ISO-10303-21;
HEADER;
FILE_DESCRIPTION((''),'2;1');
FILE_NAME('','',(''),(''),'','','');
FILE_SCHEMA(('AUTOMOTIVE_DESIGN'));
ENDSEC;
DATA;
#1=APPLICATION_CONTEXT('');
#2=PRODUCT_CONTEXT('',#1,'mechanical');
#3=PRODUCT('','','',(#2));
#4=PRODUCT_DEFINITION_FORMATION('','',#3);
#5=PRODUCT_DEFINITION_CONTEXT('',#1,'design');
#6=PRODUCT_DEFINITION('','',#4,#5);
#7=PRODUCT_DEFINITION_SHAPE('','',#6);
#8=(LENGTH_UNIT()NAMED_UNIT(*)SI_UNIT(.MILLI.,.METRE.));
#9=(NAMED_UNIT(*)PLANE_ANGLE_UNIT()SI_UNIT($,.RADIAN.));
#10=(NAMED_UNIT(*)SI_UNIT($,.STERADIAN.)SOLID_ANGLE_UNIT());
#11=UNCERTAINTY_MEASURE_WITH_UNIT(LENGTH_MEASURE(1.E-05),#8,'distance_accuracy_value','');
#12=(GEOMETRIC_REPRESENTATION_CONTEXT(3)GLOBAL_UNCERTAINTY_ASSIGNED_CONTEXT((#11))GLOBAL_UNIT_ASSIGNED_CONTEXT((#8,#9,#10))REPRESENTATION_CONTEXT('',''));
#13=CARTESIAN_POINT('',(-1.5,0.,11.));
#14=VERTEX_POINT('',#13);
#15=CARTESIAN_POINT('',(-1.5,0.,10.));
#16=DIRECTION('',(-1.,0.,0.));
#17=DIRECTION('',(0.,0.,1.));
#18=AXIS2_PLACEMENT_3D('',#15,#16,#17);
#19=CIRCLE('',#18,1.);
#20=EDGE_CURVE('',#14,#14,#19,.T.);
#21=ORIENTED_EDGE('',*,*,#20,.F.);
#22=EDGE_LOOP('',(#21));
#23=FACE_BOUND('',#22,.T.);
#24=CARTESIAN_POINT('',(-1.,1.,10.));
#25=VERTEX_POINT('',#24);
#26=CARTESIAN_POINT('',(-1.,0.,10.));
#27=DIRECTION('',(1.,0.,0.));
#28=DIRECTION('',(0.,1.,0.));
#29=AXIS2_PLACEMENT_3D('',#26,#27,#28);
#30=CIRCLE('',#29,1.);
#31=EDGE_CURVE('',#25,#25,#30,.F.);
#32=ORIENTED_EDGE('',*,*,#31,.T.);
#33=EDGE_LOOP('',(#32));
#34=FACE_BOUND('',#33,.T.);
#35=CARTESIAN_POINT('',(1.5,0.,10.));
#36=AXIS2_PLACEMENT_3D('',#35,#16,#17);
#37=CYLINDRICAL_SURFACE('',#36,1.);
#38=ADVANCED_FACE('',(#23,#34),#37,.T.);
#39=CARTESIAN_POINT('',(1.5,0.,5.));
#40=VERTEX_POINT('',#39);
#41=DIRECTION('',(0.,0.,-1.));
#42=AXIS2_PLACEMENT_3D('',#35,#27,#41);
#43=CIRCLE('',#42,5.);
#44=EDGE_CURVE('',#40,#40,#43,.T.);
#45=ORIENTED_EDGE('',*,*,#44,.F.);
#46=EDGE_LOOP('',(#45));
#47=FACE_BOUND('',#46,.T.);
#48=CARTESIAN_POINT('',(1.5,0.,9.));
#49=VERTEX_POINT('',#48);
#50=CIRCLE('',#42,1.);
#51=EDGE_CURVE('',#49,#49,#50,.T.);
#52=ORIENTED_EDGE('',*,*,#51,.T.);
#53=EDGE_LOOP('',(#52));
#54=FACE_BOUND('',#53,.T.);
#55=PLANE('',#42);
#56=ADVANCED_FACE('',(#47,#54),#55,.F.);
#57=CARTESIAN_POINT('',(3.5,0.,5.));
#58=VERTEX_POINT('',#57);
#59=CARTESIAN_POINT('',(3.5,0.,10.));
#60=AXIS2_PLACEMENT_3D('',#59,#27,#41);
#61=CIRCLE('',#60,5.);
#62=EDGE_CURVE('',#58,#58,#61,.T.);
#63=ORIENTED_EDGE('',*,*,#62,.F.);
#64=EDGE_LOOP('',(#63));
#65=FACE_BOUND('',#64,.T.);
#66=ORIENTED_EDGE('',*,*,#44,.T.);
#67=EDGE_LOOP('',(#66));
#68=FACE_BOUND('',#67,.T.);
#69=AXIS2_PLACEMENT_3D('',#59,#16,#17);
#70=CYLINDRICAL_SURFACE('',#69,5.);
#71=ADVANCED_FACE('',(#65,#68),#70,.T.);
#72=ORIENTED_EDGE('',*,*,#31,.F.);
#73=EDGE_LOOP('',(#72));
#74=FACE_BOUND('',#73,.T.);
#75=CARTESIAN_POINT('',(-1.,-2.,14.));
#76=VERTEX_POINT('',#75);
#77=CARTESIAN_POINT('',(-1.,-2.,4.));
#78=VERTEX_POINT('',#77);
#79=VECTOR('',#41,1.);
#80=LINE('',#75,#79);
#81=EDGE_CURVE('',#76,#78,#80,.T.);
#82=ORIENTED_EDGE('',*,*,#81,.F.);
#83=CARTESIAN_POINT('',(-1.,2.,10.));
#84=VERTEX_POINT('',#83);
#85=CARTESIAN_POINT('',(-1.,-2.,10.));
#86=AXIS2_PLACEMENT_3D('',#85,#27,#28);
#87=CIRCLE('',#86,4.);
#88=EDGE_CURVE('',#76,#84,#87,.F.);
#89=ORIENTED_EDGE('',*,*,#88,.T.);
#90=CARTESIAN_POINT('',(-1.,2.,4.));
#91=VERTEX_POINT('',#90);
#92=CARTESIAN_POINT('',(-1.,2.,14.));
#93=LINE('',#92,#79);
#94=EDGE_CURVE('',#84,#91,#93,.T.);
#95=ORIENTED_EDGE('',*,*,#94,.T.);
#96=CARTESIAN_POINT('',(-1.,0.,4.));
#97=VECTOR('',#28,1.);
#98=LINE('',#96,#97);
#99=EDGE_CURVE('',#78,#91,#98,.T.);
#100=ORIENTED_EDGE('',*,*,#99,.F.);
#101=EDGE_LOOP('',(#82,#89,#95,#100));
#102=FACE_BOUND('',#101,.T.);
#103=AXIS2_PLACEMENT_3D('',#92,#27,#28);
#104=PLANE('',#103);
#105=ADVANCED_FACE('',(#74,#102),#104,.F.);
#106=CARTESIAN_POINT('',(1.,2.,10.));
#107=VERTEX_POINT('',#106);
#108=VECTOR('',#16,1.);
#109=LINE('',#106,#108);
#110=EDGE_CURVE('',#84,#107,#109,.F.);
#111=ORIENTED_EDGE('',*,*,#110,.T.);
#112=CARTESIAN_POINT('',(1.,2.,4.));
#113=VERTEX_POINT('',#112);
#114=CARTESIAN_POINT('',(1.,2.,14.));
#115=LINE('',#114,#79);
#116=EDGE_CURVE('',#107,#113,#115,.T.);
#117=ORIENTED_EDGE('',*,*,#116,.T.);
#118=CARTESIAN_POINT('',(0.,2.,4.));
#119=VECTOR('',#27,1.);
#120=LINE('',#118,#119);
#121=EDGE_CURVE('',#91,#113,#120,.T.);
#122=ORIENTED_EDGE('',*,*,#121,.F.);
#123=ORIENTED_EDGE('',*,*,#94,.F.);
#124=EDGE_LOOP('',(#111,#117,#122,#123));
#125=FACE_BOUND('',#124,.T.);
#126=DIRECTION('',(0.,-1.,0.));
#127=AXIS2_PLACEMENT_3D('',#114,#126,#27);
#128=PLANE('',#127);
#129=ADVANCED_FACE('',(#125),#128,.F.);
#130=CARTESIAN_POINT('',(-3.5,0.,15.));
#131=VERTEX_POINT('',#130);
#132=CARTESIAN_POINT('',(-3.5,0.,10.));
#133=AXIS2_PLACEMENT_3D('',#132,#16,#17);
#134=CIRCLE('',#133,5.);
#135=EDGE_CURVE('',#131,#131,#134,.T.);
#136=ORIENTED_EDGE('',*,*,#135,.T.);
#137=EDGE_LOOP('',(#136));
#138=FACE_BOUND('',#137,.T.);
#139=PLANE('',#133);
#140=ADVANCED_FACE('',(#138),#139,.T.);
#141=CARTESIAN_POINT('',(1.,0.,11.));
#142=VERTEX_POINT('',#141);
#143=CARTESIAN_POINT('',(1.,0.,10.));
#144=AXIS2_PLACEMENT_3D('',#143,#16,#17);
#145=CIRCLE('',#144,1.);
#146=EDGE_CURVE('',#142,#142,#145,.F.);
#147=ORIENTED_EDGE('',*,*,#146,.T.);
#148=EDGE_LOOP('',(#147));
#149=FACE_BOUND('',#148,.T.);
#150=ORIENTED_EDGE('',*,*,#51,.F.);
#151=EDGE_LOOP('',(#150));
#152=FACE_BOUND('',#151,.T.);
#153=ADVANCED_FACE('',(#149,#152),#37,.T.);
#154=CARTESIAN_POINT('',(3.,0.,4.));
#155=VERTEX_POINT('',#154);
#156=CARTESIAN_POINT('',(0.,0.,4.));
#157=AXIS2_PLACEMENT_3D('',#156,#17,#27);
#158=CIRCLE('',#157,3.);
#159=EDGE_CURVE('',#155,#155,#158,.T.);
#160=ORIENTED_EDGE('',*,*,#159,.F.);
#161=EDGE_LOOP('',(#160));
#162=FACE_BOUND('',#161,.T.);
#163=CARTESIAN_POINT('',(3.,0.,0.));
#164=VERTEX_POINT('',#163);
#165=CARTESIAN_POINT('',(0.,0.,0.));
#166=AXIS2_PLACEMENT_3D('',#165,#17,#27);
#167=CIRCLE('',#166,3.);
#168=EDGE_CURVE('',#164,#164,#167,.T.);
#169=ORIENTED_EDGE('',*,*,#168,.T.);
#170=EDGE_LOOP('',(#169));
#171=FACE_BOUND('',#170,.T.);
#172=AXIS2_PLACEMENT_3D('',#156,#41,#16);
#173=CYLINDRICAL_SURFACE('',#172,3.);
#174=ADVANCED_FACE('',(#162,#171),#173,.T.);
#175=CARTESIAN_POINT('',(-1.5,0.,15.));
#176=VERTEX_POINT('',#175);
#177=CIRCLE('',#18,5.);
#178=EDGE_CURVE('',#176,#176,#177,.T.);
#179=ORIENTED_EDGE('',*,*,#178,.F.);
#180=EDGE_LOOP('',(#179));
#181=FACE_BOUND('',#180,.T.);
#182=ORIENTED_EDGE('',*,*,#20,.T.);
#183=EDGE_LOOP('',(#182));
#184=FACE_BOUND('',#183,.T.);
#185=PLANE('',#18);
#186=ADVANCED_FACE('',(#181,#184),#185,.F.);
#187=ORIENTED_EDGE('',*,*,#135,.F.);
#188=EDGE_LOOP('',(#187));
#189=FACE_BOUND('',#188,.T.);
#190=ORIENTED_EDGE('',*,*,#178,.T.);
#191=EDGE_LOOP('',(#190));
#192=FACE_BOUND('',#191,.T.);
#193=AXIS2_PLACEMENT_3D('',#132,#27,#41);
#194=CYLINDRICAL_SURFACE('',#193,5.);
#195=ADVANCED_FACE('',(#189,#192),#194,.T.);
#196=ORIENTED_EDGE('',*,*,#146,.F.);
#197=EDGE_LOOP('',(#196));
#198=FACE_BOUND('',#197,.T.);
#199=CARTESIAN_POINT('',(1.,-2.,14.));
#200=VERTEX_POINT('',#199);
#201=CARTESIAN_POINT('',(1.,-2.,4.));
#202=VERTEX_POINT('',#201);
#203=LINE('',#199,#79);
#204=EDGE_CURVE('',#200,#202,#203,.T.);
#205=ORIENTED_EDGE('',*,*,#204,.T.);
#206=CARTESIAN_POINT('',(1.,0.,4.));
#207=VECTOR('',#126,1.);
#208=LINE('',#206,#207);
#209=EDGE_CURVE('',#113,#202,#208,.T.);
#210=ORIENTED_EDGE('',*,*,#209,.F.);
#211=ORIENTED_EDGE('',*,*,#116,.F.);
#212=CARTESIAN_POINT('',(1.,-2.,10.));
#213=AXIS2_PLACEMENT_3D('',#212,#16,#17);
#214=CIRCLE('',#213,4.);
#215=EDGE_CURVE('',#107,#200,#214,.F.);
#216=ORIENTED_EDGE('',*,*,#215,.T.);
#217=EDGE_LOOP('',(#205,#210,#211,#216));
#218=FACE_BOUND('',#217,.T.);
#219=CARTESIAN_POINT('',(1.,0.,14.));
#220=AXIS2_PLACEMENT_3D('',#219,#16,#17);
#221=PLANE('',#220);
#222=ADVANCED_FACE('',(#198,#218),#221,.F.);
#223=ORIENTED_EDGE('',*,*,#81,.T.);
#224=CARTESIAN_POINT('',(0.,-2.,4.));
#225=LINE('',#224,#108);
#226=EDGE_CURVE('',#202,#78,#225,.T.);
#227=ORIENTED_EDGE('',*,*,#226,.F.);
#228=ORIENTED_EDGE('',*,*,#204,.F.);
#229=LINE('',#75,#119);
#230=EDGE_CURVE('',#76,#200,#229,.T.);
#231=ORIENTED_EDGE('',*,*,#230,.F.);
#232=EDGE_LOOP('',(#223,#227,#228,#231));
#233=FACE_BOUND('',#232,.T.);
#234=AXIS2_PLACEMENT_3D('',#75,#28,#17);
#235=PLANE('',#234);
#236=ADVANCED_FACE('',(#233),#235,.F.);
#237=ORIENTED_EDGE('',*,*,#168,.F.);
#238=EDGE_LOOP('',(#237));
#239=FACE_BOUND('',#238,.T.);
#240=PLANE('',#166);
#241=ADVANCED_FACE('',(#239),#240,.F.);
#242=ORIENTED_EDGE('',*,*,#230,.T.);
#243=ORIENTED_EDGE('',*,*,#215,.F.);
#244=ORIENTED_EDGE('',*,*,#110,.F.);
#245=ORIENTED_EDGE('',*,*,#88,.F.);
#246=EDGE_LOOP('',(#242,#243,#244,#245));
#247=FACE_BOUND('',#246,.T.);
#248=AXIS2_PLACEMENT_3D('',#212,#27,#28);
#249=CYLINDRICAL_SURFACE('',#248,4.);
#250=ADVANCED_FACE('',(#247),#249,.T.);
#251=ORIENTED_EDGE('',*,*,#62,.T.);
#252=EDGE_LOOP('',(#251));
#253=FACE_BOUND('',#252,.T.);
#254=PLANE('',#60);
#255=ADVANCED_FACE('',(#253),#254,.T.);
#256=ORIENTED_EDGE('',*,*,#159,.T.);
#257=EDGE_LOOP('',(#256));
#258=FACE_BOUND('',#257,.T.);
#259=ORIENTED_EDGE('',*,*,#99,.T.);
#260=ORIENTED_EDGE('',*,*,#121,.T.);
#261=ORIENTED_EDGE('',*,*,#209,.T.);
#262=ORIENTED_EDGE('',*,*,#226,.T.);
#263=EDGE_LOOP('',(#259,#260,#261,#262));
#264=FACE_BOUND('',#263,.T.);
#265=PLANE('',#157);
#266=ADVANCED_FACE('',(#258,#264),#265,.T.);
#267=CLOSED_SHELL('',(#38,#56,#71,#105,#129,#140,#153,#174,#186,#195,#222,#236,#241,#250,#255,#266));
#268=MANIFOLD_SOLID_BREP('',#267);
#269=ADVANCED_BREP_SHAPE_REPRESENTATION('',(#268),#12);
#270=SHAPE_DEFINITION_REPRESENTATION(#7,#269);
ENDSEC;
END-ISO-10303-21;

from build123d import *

# Parameters (mm, degrees)
SKETCH_1_R      = 3
EXTRUDE_1_DEPTH = 4
EXTRUDE_2_DEPTH = 14
SKETCH_4_R      = 1
EXTRUDE_3_DEPTH = 1.5
SKETCH_5_R      = 5
EXTRUDE_4_DEPTH = 2
EXTRUDE_START   = 2
SKETCH_6_R      = 5
EXTRUDE_5_DEPTH = 2
FILLET_1_R      = 4


with BuildPart() as part:
    # 草图1 → 凸台-拉伸1 (new body)
    with BuildSketch(Plane.XY):
        Circle(SKETCH_1_R)
    extrude(amount=EXTRUDE_1_DEPTH)

    # 草图2 → 凸台-拉伸2 (add)
    with BuildSketch(Plane.XY):
        Polygon((1, 0), (1, 2), (-1, 2), (-1, -2), (1, -2), align=None)
    extrude(amount=EXTRUDE_2_DEPTH)

    # 草图4 → 凸台-拉伸3 (add, symmetric)
    with BuildSketch(Plane(origin=(0, 0, 0), x_dir=(0, 0, -1), z_dir=(1, 0, 0))):
        with Locations(Location((-10, 0, 0), (0, 0, 90))):
            Circle(SKETCH_4_R)
    extrude(amount=EXTRUDE_3_DEPTH, both=True)

    # 草图5 → 凸台-拉伸4 (add)
    with BuildSketch(Plane.ZY.offset(1.5)):
        with Locations((10, 0)):
            Circle(SKETCH_5_R)
    extrude(amount=EXTRUDE_4_DEPTH)

    # 草图6 → 凸台-拉伸5 (add)
    with BuildSketch(Plane(origin=(1.5, 0, 0), x_dir=(0, 0, -1), z_dir=(1, 0, 0)).offset(EXTRUDE_START)):
        with Locations(Location((-10, 0, 0), (0, 0, 180))):
            Circle(SKETCH_6_R)
    extrude(amount=-EXTRUDE_5_DEPTH)

    # 圆角1
    fillet_1_edges = [part.edges().sort_by_distance(p)[0] for p in [
        (0, 2, 14),
    ]]
    fillet(fillet_1_edges, radius=FILLET_1_R - 0.0001)  # a hair under: the kernel refuses the full size


solid = part.part
